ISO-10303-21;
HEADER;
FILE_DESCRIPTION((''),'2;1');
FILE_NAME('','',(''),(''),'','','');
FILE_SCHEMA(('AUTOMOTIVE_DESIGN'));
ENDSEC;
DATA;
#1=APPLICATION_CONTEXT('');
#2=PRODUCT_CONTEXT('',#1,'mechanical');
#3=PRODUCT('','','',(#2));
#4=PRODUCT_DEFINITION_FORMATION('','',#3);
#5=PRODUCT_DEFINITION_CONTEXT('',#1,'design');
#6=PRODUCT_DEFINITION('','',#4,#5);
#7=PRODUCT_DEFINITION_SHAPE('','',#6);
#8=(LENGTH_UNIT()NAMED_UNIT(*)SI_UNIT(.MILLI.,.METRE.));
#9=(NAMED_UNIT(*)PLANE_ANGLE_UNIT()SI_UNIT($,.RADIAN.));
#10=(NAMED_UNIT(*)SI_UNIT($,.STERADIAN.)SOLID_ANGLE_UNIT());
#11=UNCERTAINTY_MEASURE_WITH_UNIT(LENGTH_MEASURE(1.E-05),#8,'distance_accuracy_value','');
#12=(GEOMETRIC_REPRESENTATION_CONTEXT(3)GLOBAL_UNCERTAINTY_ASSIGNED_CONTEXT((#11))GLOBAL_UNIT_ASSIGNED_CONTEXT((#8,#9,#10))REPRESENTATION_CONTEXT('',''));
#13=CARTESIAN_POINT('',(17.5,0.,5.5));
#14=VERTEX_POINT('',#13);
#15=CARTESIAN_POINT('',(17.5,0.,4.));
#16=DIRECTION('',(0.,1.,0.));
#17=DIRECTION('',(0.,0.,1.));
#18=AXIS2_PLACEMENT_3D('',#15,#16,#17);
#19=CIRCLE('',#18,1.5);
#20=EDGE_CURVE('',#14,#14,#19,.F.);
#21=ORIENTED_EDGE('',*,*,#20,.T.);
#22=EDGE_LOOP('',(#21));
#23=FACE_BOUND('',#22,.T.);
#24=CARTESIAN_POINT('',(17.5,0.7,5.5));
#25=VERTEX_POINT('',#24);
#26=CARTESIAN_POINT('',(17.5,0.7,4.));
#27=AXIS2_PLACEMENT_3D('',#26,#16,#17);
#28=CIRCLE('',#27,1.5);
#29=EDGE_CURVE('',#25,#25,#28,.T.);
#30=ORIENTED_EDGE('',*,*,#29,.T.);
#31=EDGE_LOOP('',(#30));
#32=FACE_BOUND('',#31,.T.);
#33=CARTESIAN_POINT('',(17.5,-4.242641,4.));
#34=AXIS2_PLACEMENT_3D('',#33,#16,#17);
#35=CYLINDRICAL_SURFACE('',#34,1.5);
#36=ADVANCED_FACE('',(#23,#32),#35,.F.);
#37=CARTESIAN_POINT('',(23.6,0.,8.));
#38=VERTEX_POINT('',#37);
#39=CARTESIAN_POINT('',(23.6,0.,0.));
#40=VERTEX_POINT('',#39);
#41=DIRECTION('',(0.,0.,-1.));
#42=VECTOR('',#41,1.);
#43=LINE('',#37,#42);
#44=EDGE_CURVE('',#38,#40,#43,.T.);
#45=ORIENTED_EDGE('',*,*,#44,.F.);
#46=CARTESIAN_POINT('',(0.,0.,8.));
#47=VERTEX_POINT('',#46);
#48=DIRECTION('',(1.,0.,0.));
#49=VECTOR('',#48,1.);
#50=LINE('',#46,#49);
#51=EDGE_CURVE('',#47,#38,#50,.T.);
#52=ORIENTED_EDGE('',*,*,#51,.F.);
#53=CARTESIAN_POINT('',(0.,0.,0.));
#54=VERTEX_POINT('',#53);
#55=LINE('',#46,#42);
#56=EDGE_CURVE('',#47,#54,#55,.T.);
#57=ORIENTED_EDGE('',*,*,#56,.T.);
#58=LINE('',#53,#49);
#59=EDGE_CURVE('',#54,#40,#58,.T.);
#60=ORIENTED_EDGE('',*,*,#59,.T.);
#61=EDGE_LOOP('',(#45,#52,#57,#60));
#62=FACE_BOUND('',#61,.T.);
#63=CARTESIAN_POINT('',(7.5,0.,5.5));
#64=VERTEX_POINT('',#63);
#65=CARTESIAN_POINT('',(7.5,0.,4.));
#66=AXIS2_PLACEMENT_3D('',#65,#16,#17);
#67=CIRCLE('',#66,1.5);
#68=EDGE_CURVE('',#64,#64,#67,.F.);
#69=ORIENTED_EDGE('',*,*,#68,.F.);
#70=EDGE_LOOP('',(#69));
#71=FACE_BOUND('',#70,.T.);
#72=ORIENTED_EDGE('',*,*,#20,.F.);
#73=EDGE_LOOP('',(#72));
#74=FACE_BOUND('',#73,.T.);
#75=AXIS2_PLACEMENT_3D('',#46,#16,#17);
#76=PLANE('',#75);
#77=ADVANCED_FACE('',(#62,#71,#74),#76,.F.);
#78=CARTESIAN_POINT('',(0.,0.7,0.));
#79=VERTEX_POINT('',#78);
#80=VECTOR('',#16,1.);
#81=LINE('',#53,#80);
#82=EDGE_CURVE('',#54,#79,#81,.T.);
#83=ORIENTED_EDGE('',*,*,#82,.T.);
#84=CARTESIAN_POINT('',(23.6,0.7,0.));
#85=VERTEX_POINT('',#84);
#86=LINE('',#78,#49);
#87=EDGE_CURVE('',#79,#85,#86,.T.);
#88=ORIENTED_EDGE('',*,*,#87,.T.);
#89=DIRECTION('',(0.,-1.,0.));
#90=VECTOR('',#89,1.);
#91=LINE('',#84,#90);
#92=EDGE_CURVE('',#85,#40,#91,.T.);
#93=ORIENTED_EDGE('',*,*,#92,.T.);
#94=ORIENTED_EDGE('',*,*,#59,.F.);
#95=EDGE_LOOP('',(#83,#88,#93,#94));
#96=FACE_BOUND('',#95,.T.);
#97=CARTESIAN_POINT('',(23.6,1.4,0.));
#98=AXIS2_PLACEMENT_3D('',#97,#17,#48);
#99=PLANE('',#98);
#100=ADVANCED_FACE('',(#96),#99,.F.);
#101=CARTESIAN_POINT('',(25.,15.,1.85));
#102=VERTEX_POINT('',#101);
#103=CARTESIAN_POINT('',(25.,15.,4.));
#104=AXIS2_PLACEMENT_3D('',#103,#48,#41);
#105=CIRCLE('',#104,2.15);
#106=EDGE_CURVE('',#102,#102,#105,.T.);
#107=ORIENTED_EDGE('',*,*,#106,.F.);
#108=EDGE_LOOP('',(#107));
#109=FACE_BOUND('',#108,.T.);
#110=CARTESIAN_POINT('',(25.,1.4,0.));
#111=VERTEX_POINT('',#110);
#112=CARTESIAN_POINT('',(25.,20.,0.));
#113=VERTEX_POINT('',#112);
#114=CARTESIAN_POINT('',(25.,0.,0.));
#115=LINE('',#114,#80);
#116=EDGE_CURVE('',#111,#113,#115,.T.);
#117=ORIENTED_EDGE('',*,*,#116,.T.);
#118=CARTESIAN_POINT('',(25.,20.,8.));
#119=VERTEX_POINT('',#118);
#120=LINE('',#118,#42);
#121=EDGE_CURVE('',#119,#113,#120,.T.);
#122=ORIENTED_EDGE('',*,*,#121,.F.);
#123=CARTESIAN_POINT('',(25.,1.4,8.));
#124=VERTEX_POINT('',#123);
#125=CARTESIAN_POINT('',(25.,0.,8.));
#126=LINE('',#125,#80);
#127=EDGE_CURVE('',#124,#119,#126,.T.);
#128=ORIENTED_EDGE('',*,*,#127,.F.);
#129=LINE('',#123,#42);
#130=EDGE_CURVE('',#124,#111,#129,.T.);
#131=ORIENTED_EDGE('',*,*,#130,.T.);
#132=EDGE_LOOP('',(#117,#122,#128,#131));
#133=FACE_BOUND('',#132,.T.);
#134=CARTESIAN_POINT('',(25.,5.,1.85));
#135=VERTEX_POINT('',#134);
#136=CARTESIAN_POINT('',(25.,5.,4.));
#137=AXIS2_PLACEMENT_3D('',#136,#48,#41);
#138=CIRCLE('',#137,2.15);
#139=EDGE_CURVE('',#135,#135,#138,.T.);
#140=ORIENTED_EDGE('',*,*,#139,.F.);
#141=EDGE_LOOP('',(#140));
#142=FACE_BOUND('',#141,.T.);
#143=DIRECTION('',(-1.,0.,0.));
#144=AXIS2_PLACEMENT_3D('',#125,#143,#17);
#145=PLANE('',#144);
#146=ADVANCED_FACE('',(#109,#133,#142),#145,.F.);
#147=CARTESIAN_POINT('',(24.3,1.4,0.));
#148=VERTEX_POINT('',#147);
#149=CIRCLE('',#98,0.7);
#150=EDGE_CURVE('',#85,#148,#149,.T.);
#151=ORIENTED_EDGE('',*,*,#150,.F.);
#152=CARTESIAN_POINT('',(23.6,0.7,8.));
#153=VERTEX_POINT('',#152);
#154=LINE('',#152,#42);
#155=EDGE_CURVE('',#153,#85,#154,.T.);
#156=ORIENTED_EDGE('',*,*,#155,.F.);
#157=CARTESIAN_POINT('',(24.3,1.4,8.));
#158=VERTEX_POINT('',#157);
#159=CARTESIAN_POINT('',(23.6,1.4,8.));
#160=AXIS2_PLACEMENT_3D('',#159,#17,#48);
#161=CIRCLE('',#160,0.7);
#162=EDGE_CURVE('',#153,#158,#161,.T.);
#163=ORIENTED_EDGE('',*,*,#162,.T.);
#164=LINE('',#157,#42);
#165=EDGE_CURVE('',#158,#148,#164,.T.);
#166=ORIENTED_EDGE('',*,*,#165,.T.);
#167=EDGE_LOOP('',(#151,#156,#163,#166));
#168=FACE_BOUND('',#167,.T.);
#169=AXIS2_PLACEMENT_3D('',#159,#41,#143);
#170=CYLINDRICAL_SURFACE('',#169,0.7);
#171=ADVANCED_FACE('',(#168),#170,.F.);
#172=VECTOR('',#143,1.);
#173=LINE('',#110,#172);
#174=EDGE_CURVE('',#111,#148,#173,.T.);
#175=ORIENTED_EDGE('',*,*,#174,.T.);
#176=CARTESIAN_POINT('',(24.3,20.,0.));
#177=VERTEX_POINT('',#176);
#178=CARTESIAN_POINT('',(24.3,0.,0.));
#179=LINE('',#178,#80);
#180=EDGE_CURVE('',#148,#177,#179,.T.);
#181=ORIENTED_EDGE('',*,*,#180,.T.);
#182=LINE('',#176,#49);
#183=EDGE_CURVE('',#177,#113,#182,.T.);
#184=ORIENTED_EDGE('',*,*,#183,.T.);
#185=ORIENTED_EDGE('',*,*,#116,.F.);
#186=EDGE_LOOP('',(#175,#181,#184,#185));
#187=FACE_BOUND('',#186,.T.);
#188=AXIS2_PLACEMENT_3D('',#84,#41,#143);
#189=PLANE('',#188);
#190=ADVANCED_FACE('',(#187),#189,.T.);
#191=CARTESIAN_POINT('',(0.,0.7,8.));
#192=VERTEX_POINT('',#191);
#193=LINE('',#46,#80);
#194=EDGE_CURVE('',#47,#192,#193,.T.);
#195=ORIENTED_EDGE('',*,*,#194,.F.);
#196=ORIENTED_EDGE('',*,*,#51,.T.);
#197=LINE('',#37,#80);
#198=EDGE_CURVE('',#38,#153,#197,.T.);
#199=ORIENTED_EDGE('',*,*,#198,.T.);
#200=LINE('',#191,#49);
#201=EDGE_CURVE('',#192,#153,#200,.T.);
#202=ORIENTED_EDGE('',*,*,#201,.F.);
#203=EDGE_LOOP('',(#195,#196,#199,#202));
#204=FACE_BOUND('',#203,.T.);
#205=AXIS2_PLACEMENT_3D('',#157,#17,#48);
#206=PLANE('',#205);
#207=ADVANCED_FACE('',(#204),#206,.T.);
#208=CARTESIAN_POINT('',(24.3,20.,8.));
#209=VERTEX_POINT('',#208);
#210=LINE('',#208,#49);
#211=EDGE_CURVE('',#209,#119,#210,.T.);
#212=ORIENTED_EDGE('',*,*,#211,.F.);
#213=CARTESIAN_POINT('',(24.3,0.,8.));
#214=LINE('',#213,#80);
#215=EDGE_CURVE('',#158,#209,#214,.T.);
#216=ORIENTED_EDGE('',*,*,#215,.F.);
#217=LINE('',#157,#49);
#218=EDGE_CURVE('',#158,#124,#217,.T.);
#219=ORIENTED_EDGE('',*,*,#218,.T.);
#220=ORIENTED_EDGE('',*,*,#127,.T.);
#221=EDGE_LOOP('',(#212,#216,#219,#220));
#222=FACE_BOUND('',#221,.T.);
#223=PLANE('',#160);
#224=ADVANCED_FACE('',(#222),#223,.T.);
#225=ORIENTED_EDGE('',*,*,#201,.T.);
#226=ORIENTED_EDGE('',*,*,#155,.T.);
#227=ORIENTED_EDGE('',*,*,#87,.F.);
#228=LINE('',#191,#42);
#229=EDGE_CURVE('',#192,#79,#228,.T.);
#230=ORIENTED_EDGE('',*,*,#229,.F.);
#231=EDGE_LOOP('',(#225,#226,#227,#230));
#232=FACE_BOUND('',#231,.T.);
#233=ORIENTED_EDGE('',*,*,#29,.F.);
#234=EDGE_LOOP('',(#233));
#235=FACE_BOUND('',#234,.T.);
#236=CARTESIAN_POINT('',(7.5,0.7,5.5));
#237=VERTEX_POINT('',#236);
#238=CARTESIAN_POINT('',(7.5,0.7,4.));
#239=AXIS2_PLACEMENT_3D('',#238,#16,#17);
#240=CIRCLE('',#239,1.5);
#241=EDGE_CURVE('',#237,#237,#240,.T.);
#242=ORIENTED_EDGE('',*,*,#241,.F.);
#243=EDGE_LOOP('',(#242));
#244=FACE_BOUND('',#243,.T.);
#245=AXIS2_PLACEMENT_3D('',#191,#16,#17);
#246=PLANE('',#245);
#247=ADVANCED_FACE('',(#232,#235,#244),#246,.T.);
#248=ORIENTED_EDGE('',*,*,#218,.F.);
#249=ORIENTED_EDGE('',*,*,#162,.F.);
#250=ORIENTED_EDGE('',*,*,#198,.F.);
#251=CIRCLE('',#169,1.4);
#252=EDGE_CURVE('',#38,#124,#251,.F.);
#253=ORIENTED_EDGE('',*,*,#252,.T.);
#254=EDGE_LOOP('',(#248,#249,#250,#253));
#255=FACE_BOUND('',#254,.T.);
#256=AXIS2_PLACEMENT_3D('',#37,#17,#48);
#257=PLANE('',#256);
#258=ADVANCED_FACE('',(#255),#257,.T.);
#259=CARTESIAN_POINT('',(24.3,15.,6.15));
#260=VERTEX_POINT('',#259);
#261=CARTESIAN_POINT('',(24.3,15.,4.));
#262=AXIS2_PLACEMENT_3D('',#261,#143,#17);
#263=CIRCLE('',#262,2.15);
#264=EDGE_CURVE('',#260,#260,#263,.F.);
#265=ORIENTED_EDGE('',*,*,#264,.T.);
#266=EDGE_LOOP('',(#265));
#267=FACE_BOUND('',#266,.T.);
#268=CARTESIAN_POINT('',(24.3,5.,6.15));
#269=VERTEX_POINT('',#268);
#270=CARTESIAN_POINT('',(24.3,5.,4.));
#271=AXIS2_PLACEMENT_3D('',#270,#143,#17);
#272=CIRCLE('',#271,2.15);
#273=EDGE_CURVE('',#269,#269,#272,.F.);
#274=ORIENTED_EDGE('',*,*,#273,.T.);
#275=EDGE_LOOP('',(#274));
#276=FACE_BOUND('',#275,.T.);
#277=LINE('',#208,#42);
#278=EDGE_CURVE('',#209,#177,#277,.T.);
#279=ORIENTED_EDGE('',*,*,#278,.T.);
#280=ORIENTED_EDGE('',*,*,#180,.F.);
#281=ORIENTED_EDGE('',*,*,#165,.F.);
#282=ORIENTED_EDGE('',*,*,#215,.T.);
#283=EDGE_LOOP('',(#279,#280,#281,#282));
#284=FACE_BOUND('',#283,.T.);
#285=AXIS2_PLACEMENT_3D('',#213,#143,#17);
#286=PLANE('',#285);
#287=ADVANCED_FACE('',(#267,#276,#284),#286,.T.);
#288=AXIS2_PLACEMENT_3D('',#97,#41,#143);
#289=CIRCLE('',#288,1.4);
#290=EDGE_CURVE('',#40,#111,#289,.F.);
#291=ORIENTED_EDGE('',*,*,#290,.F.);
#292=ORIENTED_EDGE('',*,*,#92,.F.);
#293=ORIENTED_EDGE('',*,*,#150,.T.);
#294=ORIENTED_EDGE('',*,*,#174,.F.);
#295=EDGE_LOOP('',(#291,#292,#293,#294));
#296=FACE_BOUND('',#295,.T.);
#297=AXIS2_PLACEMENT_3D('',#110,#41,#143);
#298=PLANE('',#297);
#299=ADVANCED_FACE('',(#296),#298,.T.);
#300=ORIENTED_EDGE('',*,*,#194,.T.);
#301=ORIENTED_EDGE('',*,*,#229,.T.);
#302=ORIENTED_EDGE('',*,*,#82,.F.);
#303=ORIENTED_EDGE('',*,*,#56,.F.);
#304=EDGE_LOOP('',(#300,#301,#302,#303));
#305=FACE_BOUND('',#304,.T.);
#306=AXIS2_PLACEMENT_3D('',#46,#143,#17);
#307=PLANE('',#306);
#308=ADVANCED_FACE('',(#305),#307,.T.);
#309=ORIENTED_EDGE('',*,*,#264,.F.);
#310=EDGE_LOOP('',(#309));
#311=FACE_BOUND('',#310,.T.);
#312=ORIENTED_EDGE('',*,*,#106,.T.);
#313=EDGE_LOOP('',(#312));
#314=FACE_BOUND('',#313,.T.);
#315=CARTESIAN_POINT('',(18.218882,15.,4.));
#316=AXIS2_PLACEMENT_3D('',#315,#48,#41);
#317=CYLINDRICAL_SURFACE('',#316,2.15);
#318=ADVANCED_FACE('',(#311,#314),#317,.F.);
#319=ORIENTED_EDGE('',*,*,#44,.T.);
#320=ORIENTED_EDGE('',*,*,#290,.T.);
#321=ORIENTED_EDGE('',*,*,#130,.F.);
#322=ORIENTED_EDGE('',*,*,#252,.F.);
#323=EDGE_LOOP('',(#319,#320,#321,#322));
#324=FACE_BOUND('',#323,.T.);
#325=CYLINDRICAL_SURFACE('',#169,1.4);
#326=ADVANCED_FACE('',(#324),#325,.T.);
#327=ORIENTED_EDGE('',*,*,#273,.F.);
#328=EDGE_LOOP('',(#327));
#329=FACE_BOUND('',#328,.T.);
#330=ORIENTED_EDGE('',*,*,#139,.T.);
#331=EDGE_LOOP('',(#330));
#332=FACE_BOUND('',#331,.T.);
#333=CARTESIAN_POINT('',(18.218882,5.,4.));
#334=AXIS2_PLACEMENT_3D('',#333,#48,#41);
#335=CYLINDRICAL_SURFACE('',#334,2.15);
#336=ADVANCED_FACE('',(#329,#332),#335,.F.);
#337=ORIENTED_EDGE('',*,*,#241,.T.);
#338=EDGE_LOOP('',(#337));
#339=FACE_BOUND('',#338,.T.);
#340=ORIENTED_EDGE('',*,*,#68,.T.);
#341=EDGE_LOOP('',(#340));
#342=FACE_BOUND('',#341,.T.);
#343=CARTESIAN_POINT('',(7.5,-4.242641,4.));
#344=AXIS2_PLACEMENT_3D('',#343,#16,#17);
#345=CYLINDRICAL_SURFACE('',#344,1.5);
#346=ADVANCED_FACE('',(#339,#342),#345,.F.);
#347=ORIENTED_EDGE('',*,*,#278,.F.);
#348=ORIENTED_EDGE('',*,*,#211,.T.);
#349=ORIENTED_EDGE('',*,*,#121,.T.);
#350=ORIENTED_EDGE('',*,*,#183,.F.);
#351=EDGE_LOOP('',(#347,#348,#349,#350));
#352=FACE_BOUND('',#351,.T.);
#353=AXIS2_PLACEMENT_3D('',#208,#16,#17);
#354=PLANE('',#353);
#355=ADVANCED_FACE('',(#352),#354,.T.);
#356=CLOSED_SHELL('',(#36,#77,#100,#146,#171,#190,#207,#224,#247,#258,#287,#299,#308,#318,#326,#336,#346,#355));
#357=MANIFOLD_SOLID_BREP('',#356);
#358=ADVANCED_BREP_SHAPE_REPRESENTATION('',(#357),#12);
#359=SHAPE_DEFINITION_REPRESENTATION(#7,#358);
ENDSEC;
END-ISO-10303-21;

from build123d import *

# Parameters (mm, degrees)
BASE_FLANGE1_DEPTH = 8
SKETCH6_R          = 1.5
CUT_EXTRUDE1_DEPTH = 0.7
SKETCH7_R          = 2.15
CUT_EXTRUDE2_DEPTH = 0.7


# Sheet-metal steps are written as plain solids
with BuildPart() as part:
    # Sketch1 → Base-Flange1 (new body)
    with BuildSketch(Plane.XY):
        with BuildLine():
            Line((0, 0), (23.6, 0))
            ThreePointArc((23.6, 0), (24.589949494, 0.410050506), (25, 1.4))
            Line((25, 1.4), (25, 20))
            Line((25, 20), (24.3, 20))
            Line((24.3, 20), (24.3, 1.4))
            ThreePointArc((24.3, 1.4), (24.094974747, 0.905025253), (23.6, 0.7))
            Line((23.6, 0.7), (0, 0.7))
            Line((0, 0.7), (0, 0))
        make_face()
    extrude(amount=BASE_FLANGE1_DEPTH)

    # Sketch6 → Cut-Extrude1 (cut)
    with BuildSketch(Plane(origin=(0, 0.7, 0), x_dir=(1, 0, 0), z_dir=(0, 1, 0))):
        with Locations(Location((7.5, -4, 0), (0, 0, 270))):
            Circle(SKETCH6_R)
        with Locations(Location((17.5, -4, 0), (0, 0, 270))):
            Circle(SKETCH6_R)
    extrude(amount=-CUT_EXTRUDE1_DEPTH, mode=Mode.SUBTRACT)

    # Sketch7 → Cut-Extrude2 (cut)
    with BuildSketch(Plane(origin=(25, 0, 0), x_dir=(0, 0, -1), z_dir=(1, 0, 0))):
        with Locations((-4, 15)):
            Circle(SKETCH7_R)
        with Locations((-4, 5)):
            Circle(SKETCH7_R)
    extrude(amount=-CUT_EXTRUDE2_DEPTH, mode=Mode.SUBTRACT)


solid = part.part
